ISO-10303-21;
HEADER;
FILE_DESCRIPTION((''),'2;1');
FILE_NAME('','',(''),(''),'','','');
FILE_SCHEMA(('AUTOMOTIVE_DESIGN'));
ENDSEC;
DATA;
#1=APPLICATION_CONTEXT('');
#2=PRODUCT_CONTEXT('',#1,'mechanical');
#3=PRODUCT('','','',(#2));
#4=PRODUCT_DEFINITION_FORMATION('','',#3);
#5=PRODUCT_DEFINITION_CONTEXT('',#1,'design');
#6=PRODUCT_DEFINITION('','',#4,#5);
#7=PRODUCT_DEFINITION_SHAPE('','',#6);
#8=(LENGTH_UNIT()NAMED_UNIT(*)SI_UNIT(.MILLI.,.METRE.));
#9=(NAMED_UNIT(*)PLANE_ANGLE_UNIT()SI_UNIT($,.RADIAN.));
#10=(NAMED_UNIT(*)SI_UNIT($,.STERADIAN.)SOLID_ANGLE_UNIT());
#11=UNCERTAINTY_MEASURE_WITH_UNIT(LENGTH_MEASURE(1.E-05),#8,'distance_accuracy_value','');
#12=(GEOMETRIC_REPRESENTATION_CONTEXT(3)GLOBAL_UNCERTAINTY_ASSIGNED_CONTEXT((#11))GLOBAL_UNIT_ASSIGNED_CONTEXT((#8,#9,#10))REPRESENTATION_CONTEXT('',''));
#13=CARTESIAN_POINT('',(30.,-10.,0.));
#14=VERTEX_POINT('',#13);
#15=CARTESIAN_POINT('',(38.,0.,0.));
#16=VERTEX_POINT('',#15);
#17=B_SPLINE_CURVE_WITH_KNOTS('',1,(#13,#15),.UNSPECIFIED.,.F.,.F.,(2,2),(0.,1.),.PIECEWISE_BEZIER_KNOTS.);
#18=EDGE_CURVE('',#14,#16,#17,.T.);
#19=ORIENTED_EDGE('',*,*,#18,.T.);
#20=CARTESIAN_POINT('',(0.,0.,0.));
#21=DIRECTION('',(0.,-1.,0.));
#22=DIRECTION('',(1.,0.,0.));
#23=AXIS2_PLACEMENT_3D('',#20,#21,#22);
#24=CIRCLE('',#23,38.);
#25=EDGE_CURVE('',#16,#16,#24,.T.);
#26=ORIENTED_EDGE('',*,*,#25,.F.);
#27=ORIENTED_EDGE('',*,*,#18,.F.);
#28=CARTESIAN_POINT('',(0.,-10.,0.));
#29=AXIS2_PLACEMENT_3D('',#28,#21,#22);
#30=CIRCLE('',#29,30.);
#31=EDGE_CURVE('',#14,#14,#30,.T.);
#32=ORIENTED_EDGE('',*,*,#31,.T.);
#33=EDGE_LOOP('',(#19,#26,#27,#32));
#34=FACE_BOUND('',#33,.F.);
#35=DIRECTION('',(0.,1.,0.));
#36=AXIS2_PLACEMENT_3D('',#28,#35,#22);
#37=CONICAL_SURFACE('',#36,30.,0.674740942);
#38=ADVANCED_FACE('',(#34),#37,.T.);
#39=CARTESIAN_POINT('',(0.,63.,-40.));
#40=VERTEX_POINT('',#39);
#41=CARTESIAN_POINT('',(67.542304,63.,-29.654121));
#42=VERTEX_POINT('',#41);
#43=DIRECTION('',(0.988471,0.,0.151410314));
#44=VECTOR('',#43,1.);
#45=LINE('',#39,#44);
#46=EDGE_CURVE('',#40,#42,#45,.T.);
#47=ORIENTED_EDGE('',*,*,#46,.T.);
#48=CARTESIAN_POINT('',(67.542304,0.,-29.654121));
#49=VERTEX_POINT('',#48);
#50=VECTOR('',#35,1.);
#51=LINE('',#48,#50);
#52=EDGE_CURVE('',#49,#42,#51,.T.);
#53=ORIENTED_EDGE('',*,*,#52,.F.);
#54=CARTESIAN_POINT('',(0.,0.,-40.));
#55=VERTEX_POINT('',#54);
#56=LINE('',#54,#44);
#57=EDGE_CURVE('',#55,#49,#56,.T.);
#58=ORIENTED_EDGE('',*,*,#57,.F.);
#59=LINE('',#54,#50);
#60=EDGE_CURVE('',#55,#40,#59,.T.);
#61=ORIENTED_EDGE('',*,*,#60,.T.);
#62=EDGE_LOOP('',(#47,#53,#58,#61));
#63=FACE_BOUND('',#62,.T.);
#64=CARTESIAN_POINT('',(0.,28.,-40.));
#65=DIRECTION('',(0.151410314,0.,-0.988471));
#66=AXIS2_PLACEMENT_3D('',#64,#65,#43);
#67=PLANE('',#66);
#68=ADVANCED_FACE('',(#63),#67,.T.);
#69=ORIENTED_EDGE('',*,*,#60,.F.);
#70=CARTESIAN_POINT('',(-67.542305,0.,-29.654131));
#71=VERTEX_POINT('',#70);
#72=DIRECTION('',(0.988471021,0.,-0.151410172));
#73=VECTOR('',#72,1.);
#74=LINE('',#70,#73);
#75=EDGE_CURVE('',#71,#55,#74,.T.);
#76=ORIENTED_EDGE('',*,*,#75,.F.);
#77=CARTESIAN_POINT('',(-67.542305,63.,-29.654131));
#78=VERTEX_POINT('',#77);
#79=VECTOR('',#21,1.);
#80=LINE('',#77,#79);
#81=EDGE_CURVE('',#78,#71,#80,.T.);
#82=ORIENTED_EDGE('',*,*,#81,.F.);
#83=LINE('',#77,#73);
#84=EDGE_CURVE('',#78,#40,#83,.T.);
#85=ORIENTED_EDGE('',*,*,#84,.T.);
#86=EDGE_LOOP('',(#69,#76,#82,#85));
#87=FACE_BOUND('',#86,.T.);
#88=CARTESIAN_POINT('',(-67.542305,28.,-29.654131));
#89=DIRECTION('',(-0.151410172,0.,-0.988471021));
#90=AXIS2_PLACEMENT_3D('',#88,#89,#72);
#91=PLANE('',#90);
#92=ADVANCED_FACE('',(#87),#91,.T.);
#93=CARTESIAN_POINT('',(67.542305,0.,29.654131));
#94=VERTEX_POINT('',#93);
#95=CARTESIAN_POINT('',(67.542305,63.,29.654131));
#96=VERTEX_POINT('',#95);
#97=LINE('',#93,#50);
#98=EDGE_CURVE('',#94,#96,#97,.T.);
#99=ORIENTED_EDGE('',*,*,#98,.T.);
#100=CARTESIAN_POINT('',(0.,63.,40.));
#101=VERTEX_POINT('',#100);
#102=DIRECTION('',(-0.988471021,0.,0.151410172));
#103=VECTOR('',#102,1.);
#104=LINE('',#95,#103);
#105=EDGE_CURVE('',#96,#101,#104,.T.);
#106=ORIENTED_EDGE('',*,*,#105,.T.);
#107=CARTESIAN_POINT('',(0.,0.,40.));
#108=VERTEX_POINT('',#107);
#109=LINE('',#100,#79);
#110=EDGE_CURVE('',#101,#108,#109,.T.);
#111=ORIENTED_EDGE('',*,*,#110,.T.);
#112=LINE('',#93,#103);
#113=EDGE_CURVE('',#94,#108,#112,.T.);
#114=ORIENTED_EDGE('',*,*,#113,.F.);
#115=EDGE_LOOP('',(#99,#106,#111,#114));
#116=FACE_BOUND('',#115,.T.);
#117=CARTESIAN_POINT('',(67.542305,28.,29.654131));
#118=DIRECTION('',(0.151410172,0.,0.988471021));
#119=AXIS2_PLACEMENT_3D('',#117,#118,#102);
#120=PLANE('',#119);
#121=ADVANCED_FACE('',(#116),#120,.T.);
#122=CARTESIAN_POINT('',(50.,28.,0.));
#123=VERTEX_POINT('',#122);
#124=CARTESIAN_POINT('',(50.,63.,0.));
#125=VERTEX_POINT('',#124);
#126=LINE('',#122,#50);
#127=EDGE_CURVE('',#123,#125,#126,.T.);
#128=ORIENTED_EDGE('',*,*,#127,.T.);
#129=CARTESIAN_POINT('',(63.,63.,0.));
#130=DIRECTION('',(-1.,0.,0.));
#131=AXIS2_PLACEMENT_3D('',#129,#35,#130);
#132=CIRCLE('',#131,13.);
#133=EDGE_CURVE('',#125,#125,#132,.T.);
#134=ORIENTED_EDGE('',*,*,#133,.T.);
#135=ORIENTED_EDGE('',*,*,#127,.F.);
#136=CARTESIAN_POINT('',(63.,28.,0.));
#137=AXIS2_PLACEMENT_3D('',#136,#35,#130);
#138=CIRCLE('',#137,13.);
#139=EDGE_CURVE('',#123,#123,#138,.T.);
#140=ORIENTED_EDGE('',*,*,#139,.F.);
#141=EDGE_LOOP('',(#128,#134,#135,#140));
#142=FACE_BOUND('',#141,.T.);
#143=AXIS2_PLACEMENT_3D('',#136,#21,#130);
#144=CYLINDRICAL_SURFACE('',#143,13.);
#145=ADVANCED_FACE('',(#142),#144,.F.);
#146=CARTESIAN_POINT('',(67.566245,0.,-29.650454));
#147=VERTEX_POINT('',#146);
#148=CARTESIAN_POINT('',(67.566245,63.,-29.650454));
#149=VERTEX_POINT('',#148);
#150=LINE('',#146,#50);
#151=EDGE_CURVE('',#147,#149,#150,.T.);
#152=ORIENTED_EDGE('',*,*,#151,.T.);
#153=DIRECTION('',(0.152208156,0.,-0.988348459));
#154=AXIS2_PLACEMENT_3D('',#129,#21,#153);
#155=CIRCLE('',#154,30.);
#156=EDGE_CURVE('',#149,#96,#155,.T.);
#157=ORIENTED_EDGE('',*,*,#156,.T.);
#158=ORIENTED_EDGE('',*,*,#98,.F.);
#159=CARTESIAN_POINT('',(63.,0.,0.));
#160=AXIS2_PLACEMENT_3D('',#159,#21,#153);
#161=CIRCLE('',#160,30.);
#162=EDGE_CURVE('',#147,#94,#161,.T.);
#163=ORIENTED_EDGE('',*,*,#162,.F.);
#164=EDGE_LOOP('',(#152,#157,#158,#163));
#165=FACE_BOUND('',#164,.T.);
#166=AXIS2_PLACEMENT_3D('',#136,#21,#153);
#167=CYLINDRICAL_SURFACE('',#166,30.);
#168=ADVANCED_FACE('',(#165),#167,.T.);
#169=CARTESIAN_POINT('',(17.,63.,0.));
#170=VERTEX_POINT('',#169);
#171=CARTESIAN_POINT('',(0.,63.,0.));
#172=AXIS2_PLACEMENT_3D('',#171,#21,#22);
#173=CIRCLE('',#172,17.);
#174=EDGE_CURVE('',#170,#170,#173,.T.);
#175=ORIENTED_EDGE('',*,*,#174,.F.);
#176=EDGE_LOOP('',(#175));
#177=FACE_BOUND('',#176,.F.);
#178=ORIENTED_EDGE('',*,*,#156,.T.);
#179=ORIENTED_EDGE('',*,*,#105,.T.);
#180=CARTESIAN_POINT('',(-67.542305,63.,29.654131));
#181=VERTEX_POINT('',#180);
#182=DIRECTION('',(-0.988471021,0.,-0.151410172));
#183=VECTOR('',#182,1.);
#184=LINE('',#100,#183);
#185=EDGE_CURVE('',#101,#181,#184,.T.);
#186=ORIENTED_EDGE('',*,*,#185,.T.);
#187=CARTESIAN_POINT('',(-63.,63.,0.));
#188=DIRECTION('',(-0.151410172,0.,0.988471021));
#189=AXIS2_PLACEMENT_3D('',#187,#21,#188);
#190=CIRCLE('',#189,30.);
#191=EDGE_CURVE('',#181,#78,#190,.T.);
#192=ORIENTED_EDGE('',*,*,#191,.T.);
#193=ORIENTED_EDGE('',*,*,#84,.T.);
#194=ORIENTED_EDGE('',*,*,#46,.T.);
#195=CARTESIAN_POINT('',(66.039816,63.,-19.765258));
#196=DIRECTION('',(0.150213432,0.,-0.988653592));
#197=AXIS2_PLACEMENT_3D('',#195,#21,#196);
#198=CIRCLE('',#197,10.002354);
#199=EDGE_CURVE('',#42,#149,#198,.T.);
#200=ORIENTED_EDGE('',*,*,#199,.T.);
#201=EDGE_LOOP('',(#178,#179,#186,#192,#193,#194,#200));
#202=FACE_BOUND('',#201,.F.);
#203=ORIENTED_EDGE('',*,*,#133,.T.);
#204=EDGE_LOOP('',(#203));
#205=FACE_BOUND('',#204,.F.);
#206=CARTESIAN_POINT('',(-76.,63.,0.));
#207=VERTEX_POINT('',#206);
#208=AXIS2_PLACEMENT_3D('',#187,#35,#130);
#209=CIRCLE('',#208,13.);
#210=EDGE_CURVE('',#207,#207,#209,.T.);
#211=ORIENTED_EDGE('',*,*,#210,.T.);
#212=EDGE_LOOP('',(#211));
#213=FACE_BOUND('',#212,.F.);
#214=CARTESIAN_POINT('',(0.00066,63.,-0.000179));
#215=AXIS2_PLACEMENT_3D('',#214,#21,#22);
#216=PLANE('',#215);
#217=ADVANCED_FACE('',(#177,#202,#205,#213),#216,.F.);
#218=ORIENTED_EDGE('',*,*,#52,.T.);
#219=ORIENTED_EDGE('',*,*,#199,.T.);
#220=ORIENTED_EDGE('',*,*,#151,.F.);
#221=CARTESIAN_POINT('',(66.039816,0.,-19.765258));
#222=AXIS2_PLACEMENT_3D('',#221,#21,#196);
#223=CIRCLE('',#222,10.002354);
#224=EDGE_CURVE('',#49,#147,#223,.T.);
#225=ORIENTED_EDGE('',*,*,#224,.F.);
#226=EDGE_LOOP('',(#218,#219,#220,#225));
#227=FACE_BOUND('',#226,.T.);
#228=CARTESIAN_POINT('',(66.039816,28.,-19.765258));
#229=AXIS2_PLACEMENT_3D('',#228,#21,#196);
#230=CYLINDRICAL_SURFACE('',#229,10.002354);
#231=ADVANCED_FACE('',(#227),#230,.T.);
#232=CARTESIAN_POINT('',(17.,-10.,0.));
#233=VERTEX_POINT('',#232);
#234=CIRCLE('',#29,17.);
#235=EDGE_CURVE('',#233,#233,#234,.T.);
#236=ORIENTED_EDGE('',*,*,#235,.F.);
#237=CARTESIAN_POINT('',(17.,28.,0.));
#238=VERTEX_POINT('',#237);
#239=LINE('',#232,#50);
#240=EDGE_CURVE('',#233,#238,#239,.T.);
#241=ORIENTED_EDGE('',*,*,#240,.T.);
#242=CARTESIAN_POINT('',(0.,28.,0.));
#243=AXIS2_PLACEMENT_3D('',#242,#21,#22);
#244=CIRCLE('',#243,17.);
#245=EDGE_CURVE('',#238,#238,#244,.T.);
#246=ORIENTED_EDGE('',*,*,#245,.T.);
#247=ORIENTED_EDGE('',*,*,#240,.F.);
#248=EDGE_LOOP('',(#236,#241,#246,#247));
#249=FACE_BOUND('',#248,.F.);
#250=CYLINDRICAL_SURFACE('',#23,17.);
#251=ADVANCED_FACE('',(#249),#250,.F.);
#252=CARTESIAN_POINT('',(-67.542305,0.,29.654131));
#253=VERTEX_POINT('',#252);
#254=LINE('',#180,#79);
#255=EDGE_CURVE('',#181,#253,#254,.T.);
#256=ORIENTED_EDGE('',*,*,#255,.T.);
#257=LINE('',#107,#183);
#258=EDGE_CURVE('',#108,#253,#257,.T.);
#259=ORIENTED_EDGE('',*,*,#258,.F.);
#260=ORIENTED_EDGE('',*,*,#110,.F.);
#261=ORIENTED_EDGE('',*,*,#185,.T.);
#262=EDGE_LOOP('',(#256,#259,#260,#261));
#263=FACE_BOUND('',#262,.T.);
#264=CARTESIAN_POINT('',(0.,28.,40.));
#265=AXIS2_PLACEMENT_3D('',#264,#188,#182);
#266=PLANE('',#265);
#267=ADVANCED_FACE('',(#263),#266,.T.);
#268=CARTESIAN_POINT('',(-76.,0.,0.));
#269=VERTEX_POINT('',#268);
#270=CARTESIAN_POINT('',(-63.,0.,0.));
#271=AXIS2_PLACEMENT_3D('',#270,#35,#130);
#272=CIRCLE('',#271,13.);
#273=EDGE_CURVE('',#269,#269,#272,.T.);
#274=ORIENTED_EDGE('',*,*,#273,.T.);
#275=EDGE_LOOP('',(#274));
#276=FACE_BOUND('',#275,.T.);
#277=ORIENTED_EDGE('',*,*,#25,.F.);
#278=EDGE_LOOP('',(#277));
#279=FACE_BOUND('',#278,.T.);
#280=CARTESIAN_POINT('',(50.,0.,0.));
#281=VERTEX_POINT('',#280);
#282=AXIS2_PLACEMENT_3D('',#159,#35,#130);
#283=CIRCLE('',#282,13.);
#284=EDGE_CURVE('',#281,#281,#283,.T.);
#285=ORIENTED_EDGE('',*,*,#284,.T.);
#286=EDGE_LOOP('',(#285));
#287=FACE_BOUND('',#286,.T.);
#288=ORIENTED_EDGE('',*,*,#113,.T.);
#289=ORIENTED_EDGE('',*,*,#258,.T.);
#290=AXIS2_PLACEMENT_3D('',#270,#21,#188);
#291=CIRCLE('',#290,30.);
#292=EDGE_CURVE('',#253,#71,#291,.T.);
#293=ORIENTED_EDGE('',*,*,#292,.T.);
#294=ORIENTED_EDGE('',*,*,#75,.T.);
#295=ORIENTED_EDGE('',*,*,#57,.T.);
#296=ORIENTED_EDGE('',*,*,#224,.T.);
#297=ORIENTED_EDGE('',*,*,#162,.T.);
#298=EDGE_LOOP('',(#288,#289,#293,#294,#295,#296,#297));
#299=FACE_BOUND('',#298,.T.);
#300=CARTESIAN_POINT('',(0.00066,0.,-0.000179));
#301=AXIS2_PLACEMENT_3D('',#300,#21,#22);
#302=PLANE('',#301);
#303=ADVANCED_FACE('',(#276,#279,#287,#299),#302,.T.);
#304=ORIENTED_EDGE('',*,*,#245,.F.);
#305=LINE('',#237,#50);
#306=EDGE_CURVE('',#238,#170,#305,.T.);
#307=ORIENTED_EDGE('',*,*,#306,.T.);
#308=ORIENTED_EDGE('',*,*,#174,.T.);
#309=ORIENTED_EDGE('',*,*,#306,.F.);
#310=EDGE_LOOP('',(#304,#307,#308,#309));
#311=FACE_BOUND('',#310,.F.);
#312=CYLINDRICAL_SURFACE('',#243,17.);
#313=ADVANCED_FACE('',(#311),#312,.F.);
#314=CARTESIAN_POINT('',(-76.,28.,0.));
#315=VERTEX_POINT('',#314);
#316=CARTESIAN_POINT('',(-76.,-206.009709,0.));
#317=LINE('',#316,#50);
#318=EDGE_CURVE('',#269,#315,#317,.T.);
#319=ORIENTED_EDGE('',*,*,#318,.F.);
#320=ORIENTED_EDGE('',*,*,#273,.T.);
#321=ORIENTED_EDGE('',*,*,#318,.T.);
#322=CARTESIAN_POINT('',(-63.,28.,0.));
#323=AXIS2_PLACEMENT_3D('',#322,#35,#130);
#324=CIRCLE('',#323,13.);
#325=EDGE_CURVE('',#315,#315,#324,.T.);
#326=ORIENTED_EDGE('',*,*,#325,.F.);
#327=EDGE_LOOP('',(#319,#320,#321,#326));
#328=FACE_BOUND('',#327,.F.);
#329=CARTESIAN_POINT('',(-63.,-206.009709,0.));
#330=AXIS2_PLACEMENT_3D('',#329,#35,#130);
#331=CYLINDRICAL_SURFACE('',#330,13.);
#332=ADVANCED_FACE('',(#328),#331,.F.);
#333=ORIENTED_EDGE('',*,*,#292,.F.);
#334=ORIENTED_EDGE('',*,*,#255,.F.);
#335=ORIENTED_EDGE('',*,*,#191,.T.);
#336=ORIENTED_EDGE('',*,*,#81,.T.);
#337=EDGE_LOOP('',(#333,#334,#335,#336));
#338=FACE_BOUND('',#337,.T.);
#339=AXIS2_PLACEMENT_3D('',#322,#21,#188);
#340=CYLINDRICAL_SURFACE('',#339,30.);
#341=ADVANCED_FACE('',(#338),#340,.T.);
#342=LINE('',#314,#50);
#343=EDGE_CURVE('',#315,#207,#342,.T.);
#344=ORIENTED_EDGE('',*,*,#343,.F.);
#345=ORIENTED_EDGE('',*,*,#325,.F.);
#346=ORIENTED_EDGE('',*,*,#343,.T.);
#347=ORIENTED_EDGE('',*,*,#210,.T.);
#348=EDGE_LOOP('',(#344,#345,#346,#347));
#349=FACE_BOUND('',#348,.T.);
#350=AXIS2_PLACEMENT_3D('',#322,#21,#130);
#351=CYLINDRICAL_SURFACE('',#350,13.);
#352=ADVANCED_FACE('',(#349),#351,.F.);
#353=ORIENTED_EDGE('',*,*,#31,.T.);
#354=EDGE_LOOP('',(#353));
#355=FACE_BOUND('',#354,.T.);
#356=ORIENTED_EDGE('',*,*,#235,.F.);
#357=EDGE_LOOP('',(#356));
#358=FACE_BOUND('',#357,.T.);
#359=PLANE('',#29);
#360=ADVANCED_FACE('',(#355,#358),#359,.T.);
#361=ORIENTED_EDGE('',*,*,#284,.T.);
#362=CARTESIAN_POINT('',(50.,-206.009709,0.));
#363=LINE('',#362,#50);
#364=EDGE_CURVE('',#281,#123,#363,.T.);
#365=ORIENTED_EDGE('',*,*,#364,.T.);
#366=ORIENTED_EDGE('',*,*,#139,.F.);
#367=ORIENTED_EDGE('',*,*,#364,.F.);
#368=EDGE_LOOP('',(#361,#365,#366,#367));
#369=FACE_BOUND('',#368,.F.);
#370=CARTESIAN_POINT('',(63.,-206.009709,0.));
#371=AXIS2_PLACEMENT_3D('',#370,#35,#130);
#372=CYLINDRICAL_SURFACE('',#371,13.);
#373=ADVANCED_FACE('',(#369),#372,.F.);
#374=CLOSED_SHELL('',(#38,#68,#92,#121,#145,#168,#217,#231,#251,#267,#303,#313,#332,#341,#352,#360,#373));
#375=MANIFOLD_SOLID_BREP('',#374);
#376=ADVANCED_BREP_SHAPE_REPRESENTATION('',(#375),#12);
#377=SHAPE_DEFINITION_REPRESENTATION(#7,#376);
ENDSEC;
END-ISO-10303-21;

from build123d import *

# Parameters (mm, degrees)
F0_R      = 13
F0_R_2    = 38
F1_DEPTH  = 28
F3_R      = 30
F5_D      = 26
F6_D      = 26
F7_D      = 34
F7_DEPTH  = 28.001
F8_R      = 17
F9_DEPTH  = 25
F10_DEPTH = 35


# Not quite as in the source:
# - ends of sketch curves that miss each other by under 0.0002 mm in the source are joined


with BuildPart() as f1:
    # F0 (on Front) → F1 (new body)
    with BuildSketch(Plane.XZ):
        with BuildLine():
            Line((67.5423051658, 29.6541306361), (0, 40))
            Line((0, 40), (-67.5423051658, 29.6541306361))
            ThreePointArc((-67.5423051658, 29.6541306361), (-93, 0), (-67.5423051658, -29.6541306361))
            Line((-67.5423051658, -29.6541306361), (0, -40))
            Line((0, -40), (67.5423036859, -29.6541209752))
            ThreePointArc((67.5423036859, -29.6541209752), (67.5542752903, -29.6522946259), (67.5662446728, -29.6504537839))
            ThreePointArc((67.5662446728, -29.6504537839), (92.9999975558, 0.0121101119), (67.5423051658, 29.6541306361))
        make_face()
        with Locations((-63, 0)):
            Circle(F0_R, mode=Mode.SUBTRACT)
        Circle(F0_R_2, mode=Mode.SUBTRACT)
        with Locations((63, 0)):
            Circle(F0_R, mode=Mode.SUBTRACT)
        with Locations((-63, 0)):
            Circle(F0_R)
        Circle(F0_R_2)
        with Locations((63, 0)):
            Circle(F0_R)
    extrude(amount=-F1_DEPTH)

    # F3 (on offset) → F4 section 0
    with BuildSketch(Plane.XZ.offset(10)):
        Circle(F3_R)
    # F0 (on Front) → F4 section 1
    with BuildSketch(Plane.XZ):
        Circle(F0_R_2)
    loft()

    # F5 (through all)
    with Locations(Plane.XZ):
        with Locations((-63, 0)):
            Hole(F5_D / 2)

    # F6 (through all)
    with Locations(Plane.XZ):
        with Locations((63, 0)):
            Hole(F6_D / 2)

    # F7 (through all, one way)
    with BuildSketch(Plane.XZ):
        with Locations((0, 0)):
            Circle(F7_D / 2)
    extrude(amount=-F7_DEPTH, mode=Mode.SUBTRACT)

    # F8 (on face) → F9 (cut)
    with BuildSketch(Plane.XZ.offset(10)):
        Circle(F8_R)
    extrude(amount=-F9_DEPTH, mode=Mode.SUBTRACT)

    # F10 (add): a face of the model
    f10_faces = [f1.faces().sort_by_distance(p)[0] for p in [
        (90.975250823, 28, 0.0112927815),
    ]]
    extrude(f10_faces, amount=F10_DEPTH)


solid = f1.part
